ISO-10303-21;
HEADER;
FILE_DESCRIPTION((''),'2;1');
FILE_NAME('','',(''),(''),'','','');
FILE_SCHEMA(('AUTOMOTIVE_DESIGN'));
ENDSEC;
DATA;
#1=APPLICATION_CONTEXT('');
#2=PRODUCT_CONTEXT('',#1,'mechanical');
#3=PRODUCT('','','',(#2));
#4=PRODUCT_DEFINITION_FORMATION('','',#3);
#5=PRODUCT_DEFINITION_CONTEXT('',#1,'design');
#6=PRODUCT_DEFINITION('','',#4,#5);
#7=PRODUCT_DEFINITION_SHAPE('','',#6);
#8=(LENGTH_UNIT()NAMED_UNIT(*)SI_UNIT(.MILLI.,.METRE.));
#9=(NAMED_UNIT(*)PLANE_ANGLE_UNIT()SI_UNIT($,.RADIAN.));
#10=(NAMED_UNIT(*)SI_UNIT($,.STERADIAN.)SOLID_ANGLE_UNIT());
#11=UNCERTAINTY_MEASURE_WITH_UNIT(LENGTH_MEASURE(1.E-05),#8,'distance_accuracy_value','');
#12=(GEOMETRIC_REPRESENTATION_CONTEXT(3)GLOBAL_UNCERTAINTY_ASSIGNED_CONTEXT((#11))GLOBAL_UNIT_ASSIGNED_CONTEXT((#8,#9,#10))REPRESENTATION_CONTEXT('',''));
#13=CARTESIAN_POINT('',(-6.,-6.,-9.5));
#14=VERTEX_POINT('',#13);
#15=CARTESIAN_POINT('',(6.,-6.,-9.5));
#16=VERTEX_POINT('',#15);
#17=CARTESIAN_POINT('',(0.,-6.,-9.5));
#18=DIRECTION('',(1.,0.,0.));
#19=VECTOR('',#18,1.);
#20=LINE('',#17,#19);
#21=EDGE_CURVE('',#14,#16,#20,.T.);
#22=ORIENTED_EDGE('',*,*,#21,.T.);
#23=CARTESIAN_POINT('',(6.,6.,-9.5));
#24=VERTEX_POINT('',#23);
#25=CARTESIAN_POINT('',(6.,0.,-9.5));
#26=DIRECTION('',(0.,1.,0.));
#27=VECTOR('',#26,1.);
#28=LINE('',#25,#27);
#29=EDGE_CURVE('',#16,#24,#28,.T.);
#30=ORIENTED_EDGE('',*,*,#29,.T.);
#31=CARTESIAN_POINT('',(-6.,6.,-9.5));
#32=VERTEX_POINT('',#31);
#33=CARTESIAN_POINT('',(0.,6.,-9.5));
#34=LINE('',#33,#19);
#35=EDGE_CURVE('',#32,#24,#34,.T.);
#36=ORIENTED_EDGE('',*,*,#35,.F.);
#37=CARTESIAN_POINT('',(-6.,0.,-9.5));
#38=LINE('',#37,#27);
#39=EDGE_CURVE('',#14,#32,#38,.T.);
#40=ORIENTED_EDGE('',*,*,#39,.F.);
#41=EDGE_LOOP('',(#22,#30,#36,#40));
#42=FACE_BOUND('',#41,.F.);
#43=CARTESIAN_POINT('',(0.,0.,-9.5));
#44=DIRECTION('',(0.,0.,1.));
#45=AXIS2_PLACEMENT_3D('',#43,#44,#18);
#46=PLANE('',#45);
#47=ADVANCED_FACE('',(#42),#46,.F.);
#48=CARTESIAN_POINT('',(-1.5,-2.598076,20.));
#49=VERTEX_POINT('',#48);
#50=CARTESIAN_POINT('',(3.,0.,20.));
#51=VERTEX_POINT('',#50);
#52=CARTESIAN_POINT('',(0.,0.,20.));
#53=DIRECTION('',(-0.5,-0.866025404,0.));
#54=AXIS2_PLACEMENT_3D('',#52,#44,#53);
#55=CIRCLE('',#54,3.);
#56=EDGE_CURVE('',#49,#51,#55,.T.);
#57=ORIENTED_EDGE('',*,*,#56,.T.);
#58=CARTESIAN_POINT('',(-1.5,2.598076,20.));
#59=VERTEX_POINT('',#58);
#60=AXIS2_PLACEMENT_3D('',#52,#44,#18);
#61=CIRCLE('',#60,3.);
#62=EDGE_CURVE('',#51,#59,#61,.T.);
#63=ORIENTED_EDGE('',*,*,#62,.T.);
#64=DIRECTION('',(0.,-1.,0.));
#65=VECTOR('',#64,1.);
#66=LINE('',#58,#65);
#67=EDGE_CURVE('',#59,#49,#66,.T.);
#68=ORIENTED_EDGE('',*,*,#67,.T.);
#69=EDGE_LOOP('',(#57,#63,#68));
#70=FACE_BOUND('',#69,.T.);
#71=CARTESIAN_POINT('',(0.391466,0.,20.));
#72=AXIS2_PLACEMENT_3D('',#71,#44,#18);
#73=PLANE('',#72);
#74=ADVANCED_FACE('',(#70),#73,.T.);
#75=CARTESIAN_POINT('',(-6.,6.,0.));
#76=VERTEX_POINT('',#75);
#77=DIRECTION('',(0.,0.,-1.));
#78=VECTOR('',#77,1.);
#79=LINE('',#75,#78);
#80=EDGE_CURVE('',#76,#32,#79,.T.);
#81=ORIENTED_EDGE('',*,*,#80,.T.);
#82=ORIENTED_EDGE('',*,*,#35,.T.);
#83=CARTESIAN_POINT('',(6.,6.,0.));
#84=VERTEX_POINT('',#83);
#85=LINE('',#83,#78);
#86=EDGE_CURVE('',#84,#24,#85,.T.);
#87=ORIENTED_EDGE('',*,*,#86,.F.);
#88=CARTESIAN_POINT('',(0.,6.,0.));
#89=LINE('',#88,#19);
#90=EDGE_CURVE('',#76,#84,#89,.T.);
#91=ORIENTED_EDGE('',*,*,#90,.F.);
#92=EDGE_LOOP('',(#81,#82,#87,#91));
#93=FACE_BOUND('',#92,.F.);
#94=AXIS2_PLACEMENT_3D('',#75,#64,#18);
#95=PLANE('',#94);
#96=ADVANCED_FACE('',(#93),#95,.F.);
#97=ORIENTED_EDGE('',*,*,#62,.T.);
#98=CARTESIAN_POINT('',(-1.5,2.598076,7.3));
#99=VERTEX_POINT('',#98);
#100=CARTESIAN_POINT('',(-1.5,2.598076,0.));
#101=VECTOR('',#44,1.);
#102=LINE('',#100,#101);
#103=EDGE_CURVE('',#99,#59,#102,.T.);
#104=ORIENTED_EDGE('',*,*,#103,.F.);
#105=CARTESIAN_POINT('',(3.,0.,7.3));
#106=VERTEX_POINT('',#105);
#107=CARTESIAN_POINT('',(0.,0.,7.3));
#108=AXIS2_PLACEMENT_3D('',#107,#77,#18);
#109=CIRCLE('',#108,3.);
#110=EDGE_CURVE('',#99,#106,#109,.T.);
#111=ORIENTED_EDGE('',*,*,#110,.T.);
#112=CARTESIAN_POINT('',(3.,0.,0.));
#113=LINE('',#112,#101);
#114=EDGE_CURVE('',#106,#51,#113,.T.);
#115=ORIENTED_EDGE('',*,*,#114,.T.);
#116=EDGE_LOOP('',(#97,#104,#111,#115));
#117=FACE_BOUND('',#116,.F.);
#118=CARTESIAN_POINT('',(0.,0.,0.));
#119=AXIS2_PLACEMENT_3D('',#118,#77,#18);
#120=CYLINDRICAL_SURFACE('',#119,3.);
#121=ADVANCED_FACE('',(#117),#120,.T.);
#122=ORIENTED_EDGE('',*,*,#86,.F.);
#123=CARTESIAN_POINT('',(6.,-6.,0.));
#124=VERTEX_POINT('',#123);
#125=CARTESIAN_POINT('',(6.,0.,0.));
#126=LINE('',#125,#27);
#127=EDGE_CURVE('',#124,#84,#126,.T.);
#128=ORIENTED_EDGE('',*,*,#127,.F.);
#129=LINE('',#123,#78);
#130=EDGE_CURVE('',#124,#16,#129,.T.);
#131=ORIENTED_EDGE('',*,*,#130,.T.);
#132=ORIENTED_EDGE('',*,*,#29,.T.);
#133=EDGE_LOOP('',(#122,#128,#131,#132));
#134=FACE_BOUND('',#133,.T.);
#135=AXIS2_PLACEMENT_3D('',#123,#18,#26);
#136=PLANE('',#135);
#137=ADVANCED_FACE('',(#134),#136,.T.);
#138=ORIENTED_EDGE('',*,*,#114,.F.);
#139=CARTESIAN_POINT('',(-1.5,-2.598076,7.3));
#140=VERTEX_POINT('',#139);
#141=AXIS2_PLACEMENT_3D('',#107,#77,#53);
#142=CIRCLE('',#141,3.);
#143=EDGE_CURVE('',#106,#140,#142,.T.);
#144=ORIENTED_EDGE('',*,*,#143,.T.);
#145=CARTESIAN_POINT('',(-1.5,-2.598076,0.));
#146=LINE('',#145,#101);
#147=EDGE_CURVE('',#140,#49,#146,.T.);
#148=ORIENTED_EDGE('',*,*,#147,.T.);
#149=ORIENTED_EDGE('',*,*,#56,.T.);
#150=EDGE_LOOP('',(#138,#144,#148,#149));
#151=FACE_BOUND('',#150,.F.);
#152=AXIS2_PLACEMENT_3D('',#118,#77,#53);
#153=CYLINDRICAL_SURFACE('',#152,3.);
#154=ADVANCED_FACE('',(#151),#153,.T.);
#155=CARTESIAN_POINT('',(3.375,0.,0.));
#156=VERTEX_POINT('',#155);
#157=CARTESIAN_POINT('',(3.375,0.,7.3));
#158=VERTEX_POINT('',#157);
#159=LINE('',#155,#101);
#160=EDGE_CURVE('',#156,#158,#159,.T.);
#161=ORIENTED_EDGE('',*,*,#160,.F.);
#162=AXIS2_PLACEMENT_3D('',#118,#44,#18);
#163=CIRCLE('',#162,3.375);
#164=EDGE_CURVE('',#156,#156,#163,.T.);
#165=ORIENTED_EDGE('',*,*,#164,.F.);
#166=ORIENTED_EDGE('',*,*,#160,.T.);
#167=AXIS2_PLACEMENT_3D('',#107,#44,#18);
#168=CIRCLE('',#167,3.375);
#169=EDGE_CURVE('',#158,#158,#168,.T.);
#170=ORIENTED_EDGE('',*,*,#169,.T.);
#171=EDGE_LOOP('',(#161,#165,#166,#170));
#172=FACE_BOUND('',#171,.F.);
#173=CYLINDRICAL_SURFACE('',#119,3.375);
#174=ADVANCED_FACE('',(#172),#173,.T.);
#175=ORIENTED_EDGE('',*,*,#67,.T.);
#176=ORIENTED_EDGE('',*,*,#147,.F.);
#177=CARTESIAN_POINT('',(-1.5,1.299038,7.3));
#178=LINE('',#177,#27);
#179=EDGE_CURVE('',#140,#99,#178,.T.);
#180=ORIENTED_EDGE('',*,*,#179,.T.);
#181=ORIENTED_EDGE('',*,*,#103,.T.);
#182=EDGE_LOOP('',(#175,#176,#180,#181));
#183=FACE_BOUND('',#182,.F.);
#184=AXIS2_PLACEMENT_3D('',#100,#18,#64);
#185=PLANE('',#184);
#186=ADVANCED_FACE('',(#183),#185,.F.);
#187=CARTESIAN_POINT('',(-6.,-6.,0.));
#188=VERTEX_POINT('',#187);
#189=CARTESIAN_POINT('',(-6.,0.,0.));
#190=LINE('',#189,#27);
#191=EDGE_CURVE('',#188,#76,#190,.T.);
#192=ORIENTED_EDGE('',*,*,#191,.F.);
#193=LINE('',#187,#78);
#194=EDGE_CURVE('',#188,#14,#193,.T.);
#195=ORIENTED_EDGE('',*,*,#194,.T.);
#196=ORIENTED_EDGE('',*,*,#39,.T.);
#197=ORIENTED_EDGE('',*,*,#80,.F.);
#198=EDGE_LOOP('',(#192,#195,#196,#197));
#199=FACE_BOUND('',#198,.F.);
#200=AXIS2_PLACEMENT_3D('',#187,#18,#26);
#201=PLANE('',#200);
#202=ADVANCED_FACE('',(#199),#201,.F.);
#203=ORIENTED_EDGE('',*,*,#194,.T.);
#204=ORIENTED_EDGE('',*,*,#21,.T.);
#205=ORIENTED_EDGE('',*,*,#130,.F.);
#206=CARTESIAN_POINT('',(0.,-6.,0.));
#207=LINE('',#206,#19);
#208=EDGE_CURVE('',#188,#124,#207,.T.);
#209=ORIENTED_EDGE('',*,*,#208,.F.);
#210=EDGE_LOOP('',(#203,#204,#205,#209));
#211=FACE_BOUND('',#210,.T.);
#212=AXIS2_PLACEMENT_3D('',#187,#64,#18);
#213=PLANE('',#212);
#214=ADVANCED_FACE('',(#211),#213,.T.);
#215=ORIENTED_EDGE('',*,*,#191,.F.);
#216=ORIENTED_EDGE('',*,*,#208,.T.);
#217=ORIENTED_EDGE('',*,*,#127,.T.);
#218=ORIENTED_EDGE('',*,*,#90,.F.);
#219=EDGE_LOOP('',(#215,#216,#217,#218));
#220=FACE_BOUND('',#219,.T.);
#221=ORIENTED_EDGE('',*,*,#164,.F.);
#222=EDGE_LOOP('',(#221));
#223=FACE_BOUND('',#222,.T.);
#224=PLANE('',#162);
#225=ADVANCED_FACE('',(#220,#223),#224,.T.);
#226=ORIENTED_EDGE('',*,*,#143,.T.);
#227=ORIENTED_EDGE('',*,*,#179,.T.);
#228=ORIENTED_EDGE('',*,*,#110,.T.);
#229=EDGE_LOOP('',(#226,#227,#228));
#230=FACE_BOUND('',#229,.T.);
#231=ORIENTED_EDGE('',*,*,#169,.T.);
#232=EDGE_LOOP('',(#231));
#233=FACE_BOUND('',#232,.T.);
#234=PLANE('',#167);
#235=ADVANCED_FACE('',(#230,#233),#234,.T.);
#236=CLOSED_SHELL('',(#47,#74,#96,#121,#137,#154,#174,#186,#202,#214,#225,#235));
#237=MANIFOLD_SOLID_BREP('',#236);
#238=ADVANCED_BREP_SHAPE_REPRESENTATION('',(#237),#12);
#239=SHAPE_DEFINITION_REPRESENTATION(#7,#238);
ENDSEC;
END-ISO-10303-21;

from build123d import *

# Parameters (mm, degrees)
F0_W     = 12
F0_H     = 12
F0_R     = 3.375
F1_DEPTH = 9.5
F2_DEPTH = 7.3
F3_DEPTH = 20


with BuildPart() as f1:
    # F0 (on Top) → F1 (new body)
    with BuildSketch(Plane.XY):
        Rectangle(F0_W, F0_H)
        Circle(F0_R, mode=Mode.SUBTRACT)
        Circle(F0_R)
        with BuildLine():
            ThreePointArc((-1.5, 2.5980762114), (1.5, 2.5980762114), (3, 0))
            ThreePointArc((3, 0), (1.5, -2.5980762114), (-1.5, -2.5980762114))
            ThreePointArc((-1.5, -2.5980762114), (-3, 0), (-1.5, 2.5980762114))
        make_face(mode=Mode.SUBTRACT)
        with BuildLine():
            ThreePointArc((-1.5, -2.5980762114), (1.5, -2.5980762114), (3, 0))
            ThreePointArc((3, 0), (1.5, 2.5980762114), (-1.5, 2.5980762114))
            Line((-1.5, 2.5980762114), (-1.5, -2.5980762114))
        make_face()
        with BuildLine():
            Line((-1.5, -2.5980762114), (-1.5, 2.5980762114))
            ThreePointArc((-1.5, 2.5980762114), (-3, 0), (-1.5, -2.5980762114))
        make_face()
    extrude(amount=-F1_DEPTH)

    # F0 (on Top) → F2 (join)
    with BuildSketch(Plane.XY):
        Circle(F0_R)
        with BuildLine():
            ThreePointArc((-1.5, 2.5980762114), (1.5, 2.5980762114), (3, 0))
            ThreePointArc((3, 0), (1.5, -2.5980762114), (-1.5, -2.5980762114))
            ThreePointArc((-1.5, -2.5980762114), (-3, 0), (-1.5, 2.5980762114))
        make_face(mode=Mode.SUBTRACT)
        with BuildLine():
            ThreePointArc((-1.5, -2.5980762114), (1.5, -2.5980762114), (3, 0))
            ThreePointArc((3, 0), (1.5, 2.5980762114), (-1.5, 2.5980762114))
            Line((-1.5, 2.5980762114), (-1.5, -2.5980762114))
        make_face()
        with BuildLine():
            Line((-1.5, -2.5980762114), (-1.5, 2.5980762114))
            ThreePointArc((-1.5, 2.5980762114), (-3, 0), (-1.5, -2.5980762114))
        make_face()
    extrude(amount=F2_DEPTH)

    # F0 (on Top) → F3 (join)
    with BuildSketch(Plane.XY):
        with BuildLine():
            ThreePointArc((-1.5, -2.5980762114), (1.5, -2.5980762114), (3, 0))
            ThreePointArc((3, 0), (1.5, 2.5980762114), (-1.5, 2.5980762114))
            Line((-1.5, 2.5980762114), (-1.5, -2.5980762114))
        make_face()
    extrude(amount=F3_DEPTH)


solid = f1.part
